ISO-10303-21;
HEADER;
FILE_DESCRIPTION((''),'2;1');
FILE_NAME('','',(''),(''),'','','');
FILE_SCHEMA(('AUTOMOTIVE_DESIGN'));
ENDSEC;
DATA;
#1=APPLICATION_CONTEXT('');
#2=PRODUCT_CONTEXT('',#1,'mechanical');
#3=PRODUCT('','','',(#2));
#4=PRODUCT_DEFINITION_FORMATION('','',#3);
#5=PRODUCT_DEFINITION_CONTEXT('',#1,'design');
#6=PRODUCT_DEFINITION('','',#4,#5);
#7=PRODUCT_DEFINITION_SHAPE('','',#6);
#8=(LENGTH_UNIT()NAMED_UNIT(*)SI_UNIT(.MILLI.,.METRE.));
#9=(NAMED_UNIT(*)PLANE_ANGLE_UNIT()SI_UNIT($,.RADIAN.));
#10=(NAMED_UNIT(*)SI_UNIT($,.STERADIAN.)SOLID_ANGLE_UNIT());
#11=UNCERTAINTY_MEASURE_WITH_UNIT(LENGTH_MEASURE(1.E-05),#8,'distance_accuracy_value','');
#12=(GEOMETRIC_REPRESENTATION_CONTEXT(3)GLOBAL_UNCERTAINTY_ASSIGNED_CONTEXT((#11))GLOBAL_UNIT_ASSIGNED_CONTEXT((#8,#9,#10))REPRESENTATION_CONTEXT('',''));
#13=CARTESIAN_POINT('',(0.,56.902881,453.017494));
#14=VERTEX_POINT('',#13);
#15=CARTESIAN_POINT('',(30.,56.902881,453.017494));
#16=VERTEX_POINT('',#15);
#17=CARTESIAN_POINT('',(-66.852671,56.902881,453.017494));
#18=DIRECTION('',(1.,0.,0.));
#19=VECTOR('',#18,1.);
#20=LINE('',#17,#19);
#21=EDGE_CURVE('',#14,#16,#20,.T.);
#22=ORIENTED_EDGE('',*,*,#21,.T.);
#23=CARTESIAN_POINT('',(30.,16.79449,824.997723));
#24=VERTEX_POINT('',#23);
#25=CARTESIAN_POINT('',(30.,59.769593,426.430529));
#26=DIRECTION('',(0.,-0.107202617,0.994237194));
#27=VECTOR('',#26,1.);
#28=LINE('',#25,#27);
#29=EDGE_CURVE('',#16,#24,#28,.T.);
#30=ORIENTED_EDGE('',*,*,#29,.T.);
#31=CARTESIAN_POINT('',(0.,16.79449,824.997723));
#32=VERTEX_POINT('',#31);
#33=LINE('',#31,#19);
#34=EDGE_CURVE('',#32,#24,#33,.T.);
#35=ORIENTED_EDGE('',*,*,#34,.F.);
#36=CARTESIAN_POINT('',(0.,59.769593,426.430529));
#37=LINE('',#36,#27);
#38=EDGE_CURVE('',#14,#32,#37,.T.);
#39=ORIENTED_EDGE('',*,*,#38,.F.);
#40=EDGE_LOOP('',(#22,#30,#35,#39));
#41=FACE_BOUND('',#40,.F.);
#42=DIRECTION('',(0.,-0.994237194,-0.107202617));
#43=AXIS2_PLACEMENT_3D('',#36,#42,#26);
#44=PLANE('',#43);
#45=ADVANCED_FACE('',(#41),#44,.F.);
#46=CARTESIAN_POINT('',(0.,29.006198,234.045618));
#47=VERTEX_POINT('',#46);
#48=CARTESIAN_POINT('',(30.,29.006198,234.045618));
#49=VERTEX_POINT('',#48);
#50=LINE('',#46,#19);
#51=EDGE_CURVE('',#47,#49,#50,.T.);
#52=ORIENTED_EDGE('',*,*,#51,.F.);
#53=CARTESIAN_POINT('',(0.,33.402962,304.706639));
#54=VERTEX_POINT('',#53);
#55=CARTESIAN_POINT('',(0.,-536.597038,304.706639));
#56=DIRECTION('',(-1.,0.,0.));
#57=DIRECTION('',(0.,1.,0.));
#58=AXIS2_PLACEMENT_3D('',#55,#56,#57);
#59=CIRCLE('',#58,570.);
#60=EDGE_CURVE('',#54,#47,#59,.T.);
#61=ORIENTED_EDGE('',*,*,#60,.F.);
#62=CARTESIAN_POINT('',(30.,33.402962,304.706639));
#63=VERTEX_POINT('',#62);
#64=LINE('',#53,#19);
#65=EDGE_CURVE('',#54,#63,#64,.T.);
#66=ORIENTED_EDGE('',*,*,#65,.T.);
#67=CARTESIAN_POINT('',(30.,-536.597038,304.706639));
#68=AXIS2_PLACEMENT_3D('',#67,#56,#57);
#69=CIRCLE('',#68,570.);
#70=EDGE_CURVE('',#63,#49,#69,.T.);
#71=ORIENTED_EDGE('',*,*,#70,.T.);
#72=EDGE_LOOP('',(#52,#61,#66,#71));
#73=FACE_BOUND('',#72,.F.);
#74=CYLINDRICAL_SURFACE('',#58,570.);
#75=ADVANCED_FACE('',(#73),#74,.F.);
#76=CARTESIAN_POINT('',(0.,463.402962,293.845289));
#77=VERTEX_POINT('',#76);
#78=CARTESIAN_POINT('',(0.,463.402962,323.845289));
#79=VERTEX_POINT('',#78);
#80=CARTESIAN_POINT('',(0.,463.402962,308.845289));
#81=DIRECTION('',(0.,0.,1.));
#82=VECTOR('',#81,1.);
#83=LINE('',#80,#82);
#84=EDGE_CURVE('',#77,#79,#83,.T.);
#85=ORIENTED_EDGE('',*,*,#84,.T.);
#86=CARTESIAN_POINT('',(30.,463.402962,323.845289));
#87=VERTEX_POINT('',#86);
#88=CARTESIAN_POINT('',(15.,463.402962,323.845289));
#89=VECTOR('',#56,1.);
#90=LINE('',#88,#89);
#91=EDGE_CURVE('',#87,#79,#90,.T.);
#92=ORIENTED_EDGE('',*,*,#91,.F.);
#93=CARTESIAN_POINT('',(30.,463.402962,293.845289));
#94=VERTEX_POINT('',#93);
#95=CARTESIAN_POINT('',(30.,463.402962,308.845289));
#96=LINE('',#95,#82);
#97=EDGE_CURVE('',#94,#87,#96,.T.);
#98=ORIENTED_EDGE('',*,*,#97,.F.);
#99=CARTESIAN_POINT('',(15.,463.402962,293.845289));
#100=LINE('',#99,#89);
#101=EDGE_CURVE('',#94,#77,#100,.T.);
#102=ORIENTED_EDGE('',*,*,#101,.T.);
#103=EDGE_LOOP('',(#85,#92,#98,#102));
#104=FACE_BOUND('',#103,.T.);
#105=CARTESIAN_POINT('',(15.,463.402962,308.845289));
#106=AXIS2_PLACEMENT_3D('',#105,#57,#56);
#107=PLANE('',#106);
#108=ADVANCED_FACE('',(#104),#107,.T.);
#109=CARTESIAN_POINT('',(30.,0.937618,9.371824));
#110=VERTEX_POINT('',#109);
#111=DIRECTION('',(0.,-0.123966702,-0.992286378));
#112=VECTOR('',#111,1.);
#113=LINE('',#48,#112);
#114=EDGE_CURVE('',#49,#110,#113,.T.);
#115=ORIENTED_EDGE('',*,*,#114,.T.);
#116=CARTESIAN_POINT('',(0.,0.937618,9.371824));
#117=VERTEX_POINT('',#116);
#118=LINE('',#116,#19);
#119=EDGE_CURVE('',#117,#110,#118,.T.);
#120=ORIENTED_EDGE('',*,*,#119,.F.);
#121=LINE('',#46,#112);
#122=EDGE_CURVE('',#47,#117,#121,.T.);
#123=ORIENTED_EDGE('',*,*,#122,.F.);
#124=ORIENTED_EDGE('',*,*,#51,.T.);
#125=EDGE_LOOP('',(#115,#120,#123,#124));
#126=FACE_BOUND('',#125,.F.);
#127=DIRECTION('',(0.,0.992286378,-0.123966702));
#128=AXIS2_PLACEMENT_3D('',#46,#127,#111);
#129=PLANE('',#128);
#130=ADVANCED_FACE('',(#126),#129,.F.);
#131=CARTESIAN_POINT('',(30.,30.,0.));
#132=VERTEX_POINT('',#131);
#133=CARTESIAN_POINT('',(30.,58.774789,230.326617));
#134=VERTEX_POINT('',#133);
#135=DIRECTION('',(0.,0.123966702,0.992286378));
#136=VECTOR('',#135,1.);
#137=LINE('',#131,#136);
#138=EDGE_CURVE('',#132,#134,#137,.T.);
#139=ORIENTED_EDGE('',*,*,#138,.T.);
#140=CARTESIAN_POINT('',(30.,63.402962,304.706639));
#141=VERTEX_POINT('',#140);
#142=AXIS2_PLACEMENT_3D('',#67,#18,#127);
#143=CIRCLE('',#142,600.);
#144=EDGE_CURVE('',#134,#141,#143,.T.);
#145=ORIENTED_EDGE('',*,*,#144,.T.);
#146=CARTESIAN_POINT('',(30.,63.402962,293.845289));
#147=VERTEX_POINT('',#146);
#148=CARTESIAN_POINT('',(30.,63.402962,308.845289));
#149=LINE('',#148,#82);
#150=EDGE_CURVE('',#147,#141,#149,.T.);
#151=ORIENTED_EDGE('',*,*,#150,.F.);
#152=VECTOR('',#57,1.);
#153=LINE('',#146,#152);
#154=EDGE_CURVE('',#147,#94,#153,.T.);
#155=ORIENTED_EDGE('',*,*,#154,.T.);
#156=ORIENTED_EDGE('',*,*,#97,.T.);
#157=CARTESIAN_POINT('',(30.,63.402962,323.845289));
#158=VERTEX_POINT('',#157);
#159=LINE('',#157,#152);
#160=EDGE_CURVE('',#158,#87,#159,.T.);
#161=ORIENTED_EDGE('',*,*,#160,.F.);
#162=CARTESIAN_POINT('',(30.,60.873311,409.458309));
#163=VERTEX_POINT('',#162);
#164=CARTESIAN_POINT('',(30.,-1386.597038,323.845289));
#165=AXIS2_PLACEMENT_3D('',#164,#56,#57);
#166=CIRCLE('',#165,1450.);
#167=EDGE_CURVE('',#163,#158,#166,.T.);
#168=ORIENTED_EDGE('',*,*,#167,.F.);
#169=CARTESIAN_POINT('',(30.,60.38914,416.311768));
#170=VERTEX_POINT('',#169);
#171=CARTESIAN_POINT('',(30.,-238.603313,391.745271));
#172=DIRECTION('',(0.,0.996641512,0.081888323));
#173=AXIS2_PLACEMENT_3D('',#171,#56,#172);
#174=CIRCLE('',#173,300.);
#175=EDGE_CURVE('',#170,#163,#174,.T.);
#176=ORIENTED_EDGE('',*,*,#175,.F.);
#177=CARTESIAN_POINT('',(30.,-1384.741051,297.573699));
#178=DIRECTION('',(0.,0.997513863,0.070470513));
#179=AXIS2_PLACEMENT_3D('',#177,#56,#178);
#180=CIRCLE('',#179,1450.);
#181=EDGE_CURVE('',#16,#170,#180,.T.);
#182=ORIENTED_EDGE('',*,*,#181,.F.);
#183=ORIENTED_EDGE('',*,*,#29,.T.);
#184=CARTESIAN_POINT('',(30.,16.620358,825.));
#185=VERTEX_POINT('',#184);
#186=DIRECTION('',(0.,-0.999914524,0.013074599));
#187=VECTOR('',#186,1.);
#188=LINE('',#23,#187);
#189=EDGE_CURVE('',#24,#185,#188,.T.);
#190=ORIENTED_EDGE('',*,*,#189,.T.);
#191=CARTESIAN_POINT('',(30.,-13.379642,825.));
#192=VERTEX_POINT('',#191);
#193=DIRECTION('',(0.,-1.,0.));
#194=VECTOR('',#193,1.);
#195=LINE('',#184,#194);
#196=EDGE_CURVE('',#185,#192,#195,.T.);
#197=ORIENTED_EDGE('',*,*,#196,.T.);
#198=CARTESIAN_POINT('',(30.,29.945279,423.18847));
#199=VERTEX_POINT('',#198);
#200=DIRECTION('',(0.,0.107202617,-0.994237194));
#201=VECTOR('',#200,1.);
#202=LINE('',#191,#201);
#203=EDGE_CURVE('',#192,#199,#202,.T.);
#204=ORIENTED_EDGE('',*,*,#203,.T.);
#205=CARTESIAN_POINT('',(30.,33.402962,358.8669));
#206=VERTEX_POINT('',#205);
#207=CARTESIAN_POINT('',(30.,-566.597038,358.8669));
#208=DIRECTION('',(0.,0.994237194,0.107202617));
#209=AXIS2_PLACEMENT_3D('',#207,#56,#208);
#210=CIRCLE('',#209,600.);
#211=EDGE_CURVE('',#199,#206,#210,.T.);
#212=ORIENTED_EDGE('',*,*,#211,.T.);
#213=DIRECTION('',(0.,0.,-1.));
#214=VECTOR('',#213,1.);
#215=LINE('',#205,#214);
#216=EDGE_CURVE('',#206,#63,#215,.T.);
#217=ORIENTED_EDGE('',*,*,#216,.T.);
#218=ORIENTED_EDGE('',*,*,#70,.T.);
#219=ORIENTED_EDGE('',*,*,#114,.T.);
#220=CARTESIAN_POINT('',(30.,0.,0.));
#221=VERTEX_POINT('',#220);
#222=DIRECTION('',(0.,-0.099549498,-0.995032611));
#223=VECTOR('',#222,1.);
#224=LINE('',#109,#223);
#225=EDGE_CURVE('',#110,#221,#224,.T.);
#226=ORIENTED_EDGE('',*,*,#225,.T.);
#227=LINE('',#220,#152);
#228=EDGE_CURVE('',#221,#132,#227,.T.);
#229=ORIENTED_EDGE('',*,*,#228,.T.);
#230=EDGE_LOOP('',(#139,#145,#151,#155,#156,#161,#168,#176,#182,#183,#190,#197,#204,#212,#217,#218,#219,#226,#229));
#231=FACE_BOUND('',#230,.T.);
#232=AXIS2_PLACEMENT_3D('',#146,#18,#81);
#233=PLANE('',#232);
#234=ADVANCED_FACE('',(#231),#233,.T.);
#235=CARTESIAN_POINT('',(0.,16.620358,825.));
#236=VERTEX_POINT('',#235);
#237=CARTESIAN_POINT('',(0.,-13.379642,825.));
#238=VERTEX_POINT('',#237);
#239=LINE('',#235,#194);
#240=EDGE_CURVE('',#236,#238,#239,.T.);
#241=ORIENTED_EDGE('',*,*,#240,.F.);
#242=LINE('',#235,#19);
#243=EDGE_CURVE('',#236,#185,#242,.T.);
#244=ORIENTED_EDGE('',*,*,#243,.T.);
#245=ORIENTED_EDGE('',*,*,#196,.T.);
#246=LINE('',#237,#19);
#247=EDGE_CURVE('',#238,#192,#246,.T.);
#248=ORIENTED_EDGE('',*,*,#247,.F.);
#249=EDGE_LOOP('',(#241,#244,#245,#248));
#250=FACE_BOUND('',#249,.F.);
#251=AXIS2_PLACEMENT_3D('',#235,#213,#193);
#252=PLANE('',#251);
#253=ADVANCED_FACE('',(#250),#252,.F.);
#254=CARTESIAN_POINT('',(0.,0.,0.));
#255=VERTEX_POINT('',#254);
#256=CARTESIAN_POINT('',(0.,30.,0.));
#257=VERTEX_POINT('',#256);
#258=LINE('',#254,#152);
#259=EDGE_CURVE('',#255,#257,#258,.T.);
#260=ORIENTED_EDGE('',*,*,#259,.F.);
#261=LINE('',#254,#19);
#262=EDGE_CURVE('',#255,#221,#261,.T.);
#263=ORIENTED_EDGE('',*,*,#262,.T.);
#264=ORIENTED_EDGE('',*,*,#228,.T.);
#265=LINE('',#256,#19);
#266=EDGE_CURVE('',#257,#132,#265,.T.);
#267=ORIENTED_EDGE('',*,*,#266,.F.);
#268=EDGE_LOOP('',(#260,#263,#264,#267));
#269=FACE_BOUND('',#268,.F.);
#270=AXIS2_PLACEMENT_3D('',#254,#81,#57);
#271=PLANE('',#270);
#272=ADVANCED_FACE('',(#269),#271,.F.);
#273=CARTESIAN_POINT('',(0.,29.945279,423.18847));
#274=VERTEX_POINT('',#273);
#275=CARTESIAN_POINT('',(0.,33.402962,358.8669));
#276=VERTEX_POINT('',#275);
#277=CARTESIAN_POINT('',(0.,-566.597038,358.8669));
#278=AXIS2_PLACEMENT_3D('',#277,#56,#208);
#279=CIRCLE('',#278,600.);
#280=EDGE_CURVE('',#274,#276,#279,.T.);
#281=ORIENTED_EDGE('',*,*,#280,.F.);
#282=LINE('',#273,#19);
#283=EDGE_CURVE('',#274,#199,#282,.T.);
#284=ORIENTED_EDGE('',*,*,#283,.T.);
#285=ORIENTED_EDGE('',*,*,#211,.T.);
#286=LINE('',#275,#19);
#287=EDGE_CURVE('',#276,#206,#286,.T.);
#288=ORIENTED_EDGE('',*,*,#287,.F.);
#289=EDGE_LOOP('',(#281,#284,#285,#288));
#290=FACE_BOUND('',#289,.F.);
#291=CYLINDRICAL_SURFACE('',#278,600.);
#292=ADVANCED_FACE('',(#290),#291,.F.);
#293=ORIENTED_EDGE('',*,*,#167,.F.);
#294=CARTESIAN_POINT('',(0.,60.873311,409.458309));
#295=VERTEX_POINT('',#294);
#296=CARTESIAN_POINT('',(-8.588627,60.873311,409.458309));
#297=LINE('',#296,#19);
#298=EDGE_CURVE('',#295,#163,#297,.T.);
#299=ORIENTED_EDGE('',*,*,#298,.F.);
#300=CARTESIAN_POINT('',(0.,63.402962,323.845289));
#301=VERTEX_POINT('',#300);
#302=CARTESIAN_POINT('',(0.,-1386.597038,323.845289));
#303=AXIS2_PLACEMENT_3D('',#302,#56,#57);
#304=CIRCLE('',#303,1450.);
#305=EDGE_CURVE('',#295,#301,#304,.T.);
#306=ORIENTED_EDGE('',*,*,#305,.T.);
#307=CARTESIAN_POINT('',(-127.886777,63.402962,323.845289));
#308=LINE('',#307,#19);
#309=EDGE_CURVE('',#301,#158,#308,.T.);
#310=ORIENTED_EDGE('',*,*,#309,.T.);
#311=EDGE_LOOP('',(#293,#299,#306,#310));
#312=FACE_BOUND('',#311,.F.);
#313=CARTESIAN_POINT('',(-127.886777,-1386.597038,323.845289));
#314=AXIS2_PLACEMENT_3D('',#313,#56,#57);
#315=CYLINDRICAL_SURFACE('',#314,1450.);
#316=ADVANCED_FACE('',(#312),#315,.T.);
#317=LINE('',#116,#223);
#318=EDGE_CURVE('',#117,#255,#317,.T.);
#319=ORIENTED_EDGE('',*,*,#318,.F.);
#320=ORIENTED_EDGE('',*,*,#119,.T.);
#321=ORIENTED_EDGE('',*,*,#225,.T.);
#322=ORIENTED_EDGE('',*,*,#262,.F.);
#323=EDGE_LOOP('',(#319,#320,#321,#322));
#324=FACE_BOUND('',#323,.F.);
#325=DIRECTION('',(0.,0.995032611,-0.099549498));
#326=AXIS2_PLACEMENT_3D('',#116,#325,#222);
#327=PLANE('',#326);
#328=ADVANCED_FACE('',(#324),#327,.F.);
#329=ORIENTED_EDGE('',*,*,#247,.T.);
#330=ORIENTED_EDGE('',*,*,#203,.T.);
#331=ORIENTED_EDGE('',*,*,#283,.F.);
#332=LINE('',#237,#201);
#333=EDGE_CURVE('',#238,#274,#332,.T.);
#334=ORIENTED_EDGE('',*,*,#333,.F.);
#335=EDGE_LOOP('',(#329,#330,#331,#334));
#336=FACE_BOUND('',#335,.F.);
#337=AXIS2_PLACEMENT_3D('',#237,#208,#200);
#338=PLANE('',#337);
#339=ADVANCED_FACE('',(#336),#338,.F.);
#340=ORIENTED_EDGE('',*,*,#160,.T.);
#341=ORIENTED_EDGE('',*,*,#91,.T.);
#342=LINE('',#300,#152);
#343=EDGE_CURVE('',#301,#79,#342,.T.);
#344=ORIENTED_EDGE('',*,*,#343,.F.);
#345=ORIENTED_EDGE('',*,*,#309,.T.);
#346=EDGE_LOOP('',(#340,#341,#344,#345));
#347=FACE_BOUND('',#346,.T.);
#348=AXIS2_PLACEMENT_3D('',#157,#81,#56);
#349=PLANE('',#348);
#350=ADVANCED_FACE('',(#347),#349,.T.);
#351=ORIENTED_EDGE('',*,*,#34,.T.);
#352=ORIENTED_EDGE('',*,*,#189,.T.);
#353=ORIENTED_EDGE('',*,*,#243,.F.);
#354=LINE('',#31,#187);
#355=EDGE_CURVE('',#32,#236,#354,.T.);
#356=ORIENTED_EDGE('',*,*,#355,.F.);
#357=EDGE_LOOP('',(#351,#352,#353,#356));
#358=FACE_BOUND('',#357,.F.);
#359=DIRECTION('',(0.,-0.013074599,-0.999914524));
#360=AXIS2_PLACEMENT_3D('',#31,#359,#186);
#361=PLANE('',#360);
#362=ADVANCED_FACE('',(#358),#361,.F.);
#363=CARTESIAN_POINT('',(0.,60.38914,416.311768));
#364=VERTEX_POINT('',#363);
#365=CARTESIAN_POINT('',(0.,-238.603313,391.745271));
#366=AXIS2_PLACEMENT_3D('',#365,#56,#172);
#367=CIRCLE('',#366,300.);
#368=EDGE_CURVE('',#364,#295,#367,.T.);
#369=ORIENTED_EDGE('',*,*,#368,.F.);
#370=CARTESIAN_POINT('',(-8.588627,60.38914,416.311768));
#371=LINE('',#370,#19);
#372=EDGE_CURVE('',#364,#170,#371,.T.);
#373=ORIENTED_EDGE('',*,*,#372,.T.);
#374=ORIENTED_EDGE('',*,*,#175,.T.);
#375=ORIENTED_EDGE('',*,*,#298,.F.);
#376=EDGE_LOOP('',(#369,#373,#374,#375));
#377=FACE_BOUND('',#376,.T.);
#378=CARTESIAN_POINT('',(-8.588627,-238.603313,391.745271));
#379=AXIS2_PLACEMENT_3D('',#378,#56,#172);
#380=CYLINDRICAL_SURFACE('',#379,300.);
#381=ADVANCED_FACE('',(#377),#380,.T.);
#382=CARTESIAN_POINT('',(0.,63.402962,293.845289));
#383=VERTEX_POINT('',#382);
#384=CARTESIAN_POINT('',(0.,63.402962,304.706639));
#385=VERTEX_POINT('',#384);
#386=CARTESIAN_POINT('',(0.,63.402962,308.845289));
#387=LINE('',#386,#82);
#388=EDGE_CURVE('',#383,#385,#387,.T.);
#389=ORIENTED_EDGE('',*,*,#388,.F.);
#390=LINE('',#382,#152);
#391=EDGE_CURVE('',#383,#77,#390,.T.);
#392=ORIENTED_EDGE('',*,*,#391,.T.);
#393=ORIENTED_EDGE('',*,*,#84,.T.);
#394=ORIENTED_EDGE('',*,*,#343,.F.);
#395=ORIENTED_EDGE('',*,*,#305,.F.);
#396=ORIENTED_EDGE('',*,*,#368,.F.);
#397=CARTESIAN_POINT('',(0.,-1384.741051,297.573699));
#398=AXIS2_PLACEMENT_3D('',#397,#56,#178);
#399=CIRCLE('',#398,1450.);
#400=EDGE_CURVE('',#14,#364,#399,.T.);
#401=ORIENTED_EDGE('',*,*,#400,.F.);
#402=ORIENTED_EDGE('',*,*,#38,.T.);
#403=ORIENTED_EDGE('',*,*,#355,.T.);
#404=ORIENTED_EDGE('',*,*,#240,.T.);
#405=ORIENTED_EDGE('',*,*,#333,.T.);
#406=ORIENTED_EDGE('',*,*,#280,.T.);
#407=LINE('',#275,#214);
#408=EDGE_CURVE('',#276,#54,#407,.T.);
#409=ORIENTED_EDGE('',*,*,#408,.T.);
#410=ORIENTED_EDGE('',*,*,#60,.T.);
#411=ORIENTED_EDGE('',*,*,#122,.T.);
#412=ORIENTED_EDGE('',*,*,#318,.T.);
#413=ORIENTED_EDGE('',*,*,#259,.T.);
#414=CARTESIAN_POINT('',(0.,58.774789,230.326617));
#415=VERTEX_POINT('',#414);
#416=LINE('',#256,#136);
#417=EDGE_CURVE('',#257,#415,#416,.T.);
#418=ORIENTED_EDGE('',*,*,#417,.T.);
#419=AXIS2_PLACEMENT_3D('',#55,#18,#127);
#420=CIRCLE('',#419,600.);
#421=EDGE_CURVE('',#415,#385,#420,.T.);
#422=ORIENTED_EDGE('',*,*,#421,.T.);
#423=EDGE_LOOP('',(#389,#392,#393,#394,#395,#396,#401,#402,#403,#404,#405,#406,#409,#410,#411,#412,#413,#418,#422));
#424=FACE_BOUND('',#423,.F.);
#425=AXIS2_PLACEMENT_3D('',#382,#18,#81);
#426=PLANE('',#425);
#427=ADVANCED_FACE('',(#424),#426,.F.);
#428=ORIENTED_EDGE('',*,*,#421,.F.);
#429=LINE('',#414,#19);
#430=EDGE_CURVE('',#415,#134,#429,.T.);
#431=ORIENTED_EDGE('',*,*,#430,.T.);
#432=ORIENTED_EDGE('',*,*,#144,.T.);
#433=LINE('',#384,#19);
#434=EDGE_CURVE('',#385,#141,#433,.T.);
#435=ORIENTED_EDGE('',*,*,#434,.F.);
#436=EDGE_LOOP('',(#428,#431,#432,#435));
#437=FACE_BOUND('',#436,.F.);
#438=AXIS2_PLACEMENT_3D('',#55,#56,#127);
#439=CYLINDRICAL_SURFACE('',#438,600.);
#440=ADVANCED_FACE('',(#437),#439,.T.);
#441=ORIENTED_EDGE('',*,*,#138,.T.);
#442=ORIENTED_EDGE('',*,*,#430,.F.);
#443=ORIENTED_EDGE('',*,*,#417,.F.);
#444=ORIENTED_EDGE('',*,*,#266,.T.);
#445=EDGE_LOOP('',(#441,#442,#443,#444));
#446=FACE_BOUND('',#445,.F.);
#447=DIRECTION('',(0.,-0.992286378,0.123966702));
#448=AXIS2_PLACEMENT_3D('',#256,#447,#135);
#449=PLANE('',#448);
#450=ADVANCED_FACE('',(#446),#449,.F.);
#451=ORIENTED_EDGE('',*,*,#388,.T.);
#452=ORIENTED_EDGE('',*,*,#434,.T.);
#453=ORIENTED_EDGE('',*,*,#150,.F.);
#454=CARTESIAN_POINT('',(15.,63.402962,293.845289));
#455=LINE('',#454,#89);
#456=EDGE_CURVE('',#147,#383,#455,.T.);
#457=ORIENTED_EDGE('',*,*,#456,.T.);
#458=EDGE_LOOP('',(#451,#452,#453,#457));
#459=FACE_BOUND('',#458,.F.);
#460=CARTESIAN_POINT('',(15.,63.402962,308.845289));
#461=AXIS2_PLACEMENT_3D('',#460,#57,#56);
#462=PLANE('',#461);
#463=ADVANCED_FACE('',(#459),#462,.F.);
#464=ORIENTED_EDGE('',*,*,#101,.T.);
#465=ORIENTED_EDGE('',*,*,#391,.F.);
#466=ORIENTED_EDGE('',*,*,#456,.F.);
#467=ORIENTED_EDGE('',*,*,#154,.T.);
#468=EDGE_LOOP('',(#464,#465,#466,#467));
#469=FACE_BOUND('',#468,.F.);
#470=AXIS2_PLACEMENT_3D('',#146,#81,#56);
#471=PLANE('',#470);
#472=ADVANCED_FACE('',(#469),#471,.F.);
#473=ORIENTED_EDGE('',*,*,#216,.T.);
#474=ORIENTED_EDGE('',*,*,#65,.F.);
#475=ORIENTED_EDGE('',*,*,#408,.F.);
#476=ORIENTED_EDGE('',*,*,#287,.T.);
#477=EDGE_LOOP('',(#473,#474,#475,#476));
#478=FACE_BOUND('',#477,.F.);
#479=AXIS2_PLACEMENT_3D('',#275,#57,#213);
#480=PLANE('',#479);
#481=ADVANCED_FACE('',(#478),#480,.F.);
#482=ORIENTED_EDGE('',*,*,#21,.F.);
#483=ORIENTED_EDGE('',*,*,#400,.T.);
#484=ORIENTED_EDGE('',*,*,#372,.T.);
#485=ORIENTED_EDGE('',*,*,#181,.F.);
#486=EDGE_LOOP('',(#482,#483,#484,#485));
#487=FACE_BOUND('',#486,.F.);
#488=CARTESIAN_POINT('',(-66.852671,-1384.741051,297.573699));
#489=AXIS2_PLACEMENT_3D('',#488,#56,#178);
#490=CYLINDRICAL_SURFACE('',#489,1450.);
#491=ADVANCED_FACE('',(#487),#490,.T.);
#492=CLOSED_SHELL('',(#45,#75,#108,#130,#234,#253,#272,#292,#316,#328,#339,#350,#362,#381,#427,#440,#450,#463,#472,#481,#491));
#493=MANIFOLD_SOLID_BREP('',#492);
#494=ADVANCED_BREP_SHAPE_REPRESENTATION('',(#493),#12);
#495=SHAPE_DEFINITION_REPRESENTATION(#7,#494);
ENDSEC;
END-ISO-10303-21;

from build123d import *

# Parameters (mm, degrees)
F1_DEPTH    = 30
F2_T1_DEPTH = 163.7053411471
F2_T3_DEPTH = 285.7735535498
F3_T1_DEPTH = 47.177253683
F4_W        = 30
F4_H        = 30
F5_DEPTH    = 400


# Not quite as in the source:
# - a fillet or chamfer that OpenCascade refuses, or shapes differently, is made with other operations: its cross-section is extruded or revolved along the edge and cut away or added


with BuildPart() as f1:
    # F0 (on Right) → F1 (new body)
    with BuildSketch(Plane.YZ):
        with BuildLine():
            Line((0.9376178496, 9.3718236312), (0, 0))
            Line((0, 0), (30, 0))
            Line((30, 0), (58.7747889852, 230.3266173388))
            ThreePointArc((58.7747889852, 230.3266173388), (62.2448009202, 267.4447024247), (63.4029619396, 304.7066385838))
            Line((63.4029619396, 304.7066385838), (63.4029619396, 375))
            Line((63.4029619396, 375), (59.769593104, 426.4305293125))
            Line((59.769593104, 426.4305293125), (16.7944896966, 824.9977231026))
            Line((16.7944896966, 824.9977231026), (16.6203579544, 825))
            Line((16.6203579544, 825), (-13.3796420456, 825))
            Line((-13.3796420456, 825), (29.9452786307, 423.188469929))
            ThreePointArc((29.9452786307, 423.188469929), (32.5379175275, 391.0741192729), (33.4029619396, 358.8668996991))
            Line((33.4029619396, 358.8668996991), (33.4029619396, 304.7066385838))
            ThreePointArc((33.4029619396, 304.7066385838), (32.3027089712, 269.3077992327), (29.0061976329, 234.0456184011))
            Line((29.0061976329, 234.0456184011), (0.9376178496, 9.3718236312))
        make_face()
    extrude(amount=F1_DEPTH)

    # F2: fillet of radius 1450 on 4 edges, made by hand

    # F2_s2 → F2_t1 (cut)
    with BuildSketch(Plane.YZ.offset(-66.8526705736)):
        with BuildLine():
            ThreePointArc((61.6540498994, 399.7559430432), (59.5240083024, 426.4086220464), (56.9028806071, 453.0174939664))
            Line((56.9028806071, 453.0174939664), (59.769593104, 426.4305293125))
            Line((59.769593104, 426.4305293125), (61.6540498994, 399.7559430432))
        make_face()
    extrude(amount=F2_T1_DEPTH, mode=Mode.SUBTRACT)

    # F2_s4 → F2_t3 (cut)
    with BuildSketch(Plane.YZ.offset(-127.8867767749)):
        with BuildLine():
            ThreePointArc((63.4029619396, 323.84528929), (62.5014570183, 374.968195708), (59.7980632353, 426.027533089))
            Line((59.7980632353, 426.027533089), (63.4029619396, 375))
            Line((63.4029619396, 375), (63.4029619396, 323.84528929))
        make_face()
    extrude(amount=F2_T3_DEPTH, mode=Mode.SUBTRACT)

    # F3: fillet of radius 300 on 4 edges, made by hand

    # F3_s2 → F3_t1 (cut)
    with BuildSketch(Plane.YZ.offset(-8.5886268415)):
        with BuildLine():
            ThreePointArc((60.3891403463, 416.3117677563), (60.6508457711, 412.8864247118), (60.8733107804, 409.4583094831))
            ThreePointArc((60.8733107804, 409.4583094831), (60.7708746607, 411.1729780567), (60.666407351, 412.8875240775))
            ThreePointArc((60.666407351, 412.8875240775), (60.5287879715, 414.5997280322), (60.3891403463, 416.3117677563))
        make_face()
    extrude(amount=F3_T1_DEPTH, mode=Mode.SUBTRACT)

    # F4 (on face) → F5 (join)
    with BuildSketch(Plane(origin=(0, 63.4029619396, 0), x_dir=(-1, 0, 0), z_dir=(0, 1, 0))):
        with Locations((-15, 308.84528929)):
            Rectangle(F4_W, F4_H)
    extrude(amount=F5_DEPTH)


solid = f1.part
